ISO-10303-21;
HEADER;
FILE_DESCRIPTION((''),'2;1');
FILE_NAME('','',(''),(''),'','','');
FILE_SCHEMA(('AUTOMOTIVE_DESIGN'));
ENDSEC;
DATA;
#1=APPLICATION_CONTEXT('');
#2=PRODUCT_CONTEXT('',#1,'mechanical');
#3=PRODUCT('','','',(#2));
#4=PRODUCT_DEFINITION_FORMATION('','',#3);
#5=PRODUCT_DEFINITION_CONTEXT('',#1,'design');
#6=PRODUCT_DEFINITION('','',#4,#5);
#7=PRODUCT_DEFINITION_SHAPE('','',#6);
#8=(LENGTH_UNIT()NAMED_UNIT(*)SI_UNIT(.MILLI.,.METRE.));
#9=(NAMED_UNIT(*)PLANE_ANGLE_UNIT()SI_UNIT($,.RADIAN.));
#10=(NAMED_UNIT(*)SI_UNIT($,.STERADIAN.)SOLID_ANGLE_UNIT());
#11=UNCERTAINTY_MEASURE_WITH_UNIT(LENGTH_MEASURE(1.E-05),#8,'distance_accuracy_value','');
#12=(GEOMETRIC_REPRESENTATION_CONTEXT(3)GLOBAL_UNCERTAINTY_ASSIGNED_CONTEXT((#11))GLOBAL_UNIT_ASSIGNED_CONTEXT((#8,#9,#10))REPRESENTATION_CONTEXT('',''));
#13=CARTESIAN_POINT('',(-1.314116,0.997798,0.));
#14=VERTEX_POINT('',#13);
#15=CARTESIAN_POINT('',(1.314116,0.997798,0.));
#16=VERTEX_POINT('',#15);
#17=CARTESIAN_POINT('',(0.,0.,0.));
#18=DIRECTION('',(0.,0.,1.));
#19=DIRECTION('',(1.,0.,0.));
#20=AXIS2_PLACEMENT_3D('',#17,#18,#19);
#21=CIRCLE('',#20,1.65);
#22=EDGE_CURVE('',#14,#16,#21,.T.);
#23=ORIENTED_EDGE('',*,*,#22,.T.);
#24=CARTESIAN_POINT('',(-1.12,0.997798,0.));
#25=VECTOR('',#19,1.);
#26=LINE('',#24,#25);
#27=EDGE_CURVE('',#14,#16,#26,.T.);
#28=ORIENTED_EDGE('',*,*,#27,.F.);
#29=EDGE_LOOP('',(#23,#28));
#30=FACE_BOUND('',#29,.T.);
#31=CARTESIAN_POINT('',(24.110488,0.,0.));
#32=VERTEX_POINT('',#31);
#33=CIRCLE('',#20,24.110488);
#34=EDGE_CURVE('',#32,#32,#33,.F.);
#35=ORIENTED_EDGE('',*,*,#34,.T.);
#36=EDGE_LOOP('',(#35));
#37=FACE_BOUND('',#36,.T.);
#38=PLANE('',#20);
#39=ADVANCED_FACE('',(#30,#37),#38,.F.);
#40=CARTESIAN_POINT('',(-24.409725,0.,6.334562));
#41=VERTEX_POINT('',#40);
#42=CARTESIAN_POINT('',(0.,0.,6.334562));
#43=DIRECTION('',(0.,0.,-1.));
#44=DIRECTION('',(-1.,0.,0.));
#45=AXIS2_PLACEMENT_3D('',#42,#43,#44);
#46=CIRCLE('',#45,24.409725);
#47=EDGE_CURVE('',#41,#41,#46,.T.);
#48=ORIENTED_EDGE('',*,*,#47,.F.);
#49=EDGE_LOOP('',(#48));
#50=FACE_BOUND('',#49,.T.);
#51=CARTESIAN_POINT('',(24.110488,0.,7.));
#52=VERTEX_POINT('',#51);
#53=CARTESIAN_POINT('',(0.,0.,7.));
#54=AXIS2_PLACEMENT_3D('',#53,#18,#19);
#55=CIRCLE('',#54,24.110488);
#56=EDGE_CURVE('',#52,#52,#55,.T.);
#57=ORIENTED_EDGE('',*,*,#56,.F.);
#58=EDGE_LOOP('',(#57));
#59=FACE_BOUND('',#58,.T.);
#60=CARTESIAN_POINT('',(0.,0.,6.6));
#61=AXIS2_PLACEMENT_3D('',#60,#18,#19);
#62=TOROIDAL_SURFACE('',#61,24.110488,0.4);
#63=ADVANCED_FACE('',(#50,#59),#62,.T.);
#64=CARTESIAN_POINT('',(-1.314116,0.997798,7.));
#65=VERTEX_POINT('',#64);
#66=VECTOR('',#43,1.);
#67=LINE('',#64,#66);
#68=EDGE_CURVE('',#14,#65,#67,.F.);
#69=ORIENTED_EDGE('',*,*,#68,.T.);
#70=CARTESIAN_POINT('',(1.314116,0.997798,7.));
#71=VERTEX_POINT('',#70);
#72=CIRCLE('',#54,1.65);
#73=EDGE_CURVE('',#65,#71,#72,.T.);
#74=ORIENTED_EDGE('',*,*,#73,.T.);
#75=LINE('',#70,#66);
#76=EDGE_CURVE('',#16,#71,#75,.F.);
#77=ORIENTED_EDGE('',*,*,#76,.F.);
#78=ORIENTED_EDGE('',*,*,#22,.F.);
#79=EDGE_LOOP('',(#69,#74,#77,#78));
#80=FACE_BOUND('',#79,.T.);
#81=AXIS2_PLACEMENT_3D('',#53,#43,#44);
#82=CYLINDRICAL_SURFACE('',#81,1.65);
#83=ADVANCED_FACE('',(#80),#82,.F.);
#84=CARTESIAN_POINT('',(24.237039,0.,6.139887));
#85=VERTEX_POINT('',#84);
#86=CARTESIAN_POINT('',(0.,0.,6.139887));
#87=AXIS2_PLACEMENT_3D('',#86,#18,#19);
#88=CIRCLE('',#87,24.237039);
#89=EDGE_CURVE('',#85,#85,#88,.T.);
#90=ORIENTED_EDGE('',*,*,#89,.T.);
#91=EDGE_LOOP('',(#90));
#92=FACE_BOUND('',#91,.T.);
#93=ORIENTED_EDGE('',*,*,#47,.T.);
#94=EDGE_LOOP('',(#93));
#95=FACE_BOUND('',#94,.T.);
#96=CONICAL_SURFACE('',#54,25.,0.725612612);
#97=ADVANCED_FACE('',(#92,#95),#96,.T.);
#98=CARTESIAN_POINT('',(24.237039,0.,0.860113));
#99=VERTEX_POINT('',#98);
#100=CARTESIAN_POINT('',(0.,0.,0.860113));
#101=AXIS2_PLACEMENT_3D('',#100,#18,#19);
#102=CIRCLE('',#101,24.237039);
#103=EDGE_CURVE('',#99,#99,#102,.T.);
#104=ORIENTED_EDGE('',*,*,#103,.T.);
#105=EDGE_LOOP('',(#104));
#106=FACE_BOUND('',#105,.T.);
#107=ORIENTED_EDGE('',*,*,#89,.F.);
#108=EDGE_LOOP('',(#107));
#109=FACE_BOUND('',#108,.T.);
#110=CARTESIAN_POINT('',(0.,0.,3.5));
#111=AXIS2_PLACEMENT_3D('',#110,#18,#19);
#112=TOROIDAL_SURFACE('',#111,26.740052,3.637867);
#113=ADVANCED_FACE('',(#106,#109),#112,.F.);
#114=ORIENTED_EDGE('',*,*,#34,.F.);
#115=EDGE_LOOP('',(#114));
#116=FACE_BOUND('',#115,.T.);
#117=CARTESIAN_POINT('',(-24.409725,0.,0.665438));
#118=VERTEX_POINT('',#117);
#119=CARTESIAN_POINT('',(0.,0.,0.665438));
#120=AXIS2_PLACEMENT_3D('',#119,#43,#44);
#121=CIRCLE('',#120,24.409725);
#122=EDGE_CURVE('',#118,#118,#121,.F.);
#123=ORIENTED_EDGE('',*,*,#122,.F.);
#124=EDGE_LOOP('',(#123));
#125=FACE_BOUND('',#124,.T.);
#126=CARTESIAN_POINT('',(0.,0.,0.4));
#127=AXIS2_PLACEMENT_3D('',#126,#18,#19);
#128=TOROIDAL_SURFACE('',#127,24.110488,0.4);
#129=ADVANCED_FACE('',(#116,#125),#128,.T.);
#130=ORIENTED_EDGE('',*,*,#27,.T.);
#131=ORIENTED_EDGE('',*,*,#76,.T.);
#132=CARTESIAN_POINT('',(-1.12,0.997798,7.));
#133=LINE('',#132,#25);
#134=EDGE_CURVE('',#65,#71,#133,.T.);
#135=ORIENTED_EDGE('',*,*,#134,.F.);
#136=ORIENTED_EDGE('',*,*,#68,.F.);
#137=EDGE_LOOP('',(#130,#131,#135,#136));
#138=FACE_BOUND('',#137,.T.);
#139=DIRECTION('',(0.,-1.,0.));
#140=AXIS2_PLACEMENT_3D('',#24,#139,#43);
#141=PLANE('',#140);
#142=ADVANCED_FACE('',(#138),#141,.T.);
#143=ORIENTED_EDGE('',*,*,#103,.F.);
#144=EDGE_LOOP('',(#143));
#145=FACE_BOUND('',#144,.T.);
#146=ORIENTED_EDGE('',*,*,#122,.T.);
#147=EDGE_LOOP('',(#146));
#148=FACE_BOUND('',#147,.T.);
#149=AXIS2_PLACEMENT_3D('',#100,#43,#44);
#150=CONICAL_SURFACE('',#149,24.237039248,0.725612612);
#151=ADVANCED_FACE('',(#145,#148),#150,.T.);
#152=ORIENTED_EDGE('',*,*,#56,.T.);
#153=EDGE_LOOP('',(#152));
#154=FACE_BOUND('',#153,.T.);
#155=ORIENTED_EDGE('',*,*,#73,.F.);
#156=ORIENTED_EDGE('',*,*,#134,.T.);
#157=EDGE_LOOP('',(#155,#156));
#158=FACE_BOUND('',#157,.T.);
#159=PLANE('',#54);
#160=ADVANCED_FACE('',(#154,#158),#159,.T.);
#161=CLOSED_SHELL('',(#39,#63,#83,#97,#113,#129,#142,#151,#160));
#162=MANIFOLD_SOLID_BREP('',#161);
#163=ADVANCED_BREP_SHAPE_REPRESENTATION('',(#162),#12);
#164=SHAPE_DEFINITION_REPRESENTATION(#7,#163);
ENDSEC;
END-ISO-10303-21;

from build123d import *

# Parameters (mm, degrees)
SKETCH1_R           = 25
SKETCH1_R_2         = 1.5
BOSS_EXTRUDE1_DEPTH = 7
FILLET1_R           = 0.4
BOSS_EXTRUDE2_DEPTH = 7
MOVE_FACE1_DEPTH    = 7


# Read off the part's stored shape, not the designer's step: Move Face1
with BuildPart() as part:
    # Sketch1 → Boss-Extrude1 (new body)
    with BuildSketch(Plane.XY):
        Circle(SKETCH1_R)
        Circle(SKETCH1_R_2, mode=Mode.SUBTRACT)
    extrude(amount=BOSS_EXTRUDE1_DEPTH)

    # Sketch2 → Cut-Revolve1 (revolve, cut)
    with BuildSketch(Plane(origin=(0, 0, 0), x_dir=(0, 0, -1), z_dir=(1, 0, 0)), mode=Mode.PRIVATE) as cut_revolve1_sk:
        with BuildLine():
            Line((-7, 25), (-6.139887117, 24.237039248))
            ThreePointArc((-6.139887117, 24.237039248), (-3.5, 23.102184954), (-0.860112883, 24.237039248))
            Line((-0.860112883, 24.237039248), (0, 25))
            Line((0, 25), (-7, 25))
        make_face()
    revolve(cut_revolve1_sk.sketch.rotate(Axis((0, 0, 7), (0, 0, -1)), 90), axis=Axis((0, 0, 7), (0, 0, -1)), mode=Mode.SUBTRACT)

    # Fillet1
    fillet1_edges = [part.edges().sort_by_distance(p)[0] for p in [
        (-25, 0, 0),
        (-25, 0, 7),
    ]]
    fillet(fillet1_edges, radius=FILLET1_R)

    # Sketch3 → Boss-Extrude2 (add, through all)
    with BuildSketch(Plane.XY.offset(7)):
        with BuildLine():
            Line((-1.12, 0.997797575), (1.12, 0.997797575))
            ThreePointArc((1.12, 0.997797575), (0, 1.5), (-1.12, 0.997797575))
        make_face()
    extrude(amount=-BOSS_EXTRUDE2_DEPTH)

    # Move Face1 outline → Move Face1 (cut)
    with BuildSketch(Plane.XY):
        with BuildLine():
            ThreePointArc((-1.314115672, 0.997797575), (0, -1.65), (1.314115672, 0.997797575))
            Line((1.314115672, 0.997797575), (1.12, 0.997797575))
            ThreePointArc((1.12, 0.997797575), (0, -1.5), (-1.12, 0.997797575))
            Line((-1.12, 0.997797575), (-1.314115672, 0.997797575))
        make_face()
    extrude(amount=MOVE_FACE1_DEPTH, mode=Mode.SUBTRACT)


solid = part.part
